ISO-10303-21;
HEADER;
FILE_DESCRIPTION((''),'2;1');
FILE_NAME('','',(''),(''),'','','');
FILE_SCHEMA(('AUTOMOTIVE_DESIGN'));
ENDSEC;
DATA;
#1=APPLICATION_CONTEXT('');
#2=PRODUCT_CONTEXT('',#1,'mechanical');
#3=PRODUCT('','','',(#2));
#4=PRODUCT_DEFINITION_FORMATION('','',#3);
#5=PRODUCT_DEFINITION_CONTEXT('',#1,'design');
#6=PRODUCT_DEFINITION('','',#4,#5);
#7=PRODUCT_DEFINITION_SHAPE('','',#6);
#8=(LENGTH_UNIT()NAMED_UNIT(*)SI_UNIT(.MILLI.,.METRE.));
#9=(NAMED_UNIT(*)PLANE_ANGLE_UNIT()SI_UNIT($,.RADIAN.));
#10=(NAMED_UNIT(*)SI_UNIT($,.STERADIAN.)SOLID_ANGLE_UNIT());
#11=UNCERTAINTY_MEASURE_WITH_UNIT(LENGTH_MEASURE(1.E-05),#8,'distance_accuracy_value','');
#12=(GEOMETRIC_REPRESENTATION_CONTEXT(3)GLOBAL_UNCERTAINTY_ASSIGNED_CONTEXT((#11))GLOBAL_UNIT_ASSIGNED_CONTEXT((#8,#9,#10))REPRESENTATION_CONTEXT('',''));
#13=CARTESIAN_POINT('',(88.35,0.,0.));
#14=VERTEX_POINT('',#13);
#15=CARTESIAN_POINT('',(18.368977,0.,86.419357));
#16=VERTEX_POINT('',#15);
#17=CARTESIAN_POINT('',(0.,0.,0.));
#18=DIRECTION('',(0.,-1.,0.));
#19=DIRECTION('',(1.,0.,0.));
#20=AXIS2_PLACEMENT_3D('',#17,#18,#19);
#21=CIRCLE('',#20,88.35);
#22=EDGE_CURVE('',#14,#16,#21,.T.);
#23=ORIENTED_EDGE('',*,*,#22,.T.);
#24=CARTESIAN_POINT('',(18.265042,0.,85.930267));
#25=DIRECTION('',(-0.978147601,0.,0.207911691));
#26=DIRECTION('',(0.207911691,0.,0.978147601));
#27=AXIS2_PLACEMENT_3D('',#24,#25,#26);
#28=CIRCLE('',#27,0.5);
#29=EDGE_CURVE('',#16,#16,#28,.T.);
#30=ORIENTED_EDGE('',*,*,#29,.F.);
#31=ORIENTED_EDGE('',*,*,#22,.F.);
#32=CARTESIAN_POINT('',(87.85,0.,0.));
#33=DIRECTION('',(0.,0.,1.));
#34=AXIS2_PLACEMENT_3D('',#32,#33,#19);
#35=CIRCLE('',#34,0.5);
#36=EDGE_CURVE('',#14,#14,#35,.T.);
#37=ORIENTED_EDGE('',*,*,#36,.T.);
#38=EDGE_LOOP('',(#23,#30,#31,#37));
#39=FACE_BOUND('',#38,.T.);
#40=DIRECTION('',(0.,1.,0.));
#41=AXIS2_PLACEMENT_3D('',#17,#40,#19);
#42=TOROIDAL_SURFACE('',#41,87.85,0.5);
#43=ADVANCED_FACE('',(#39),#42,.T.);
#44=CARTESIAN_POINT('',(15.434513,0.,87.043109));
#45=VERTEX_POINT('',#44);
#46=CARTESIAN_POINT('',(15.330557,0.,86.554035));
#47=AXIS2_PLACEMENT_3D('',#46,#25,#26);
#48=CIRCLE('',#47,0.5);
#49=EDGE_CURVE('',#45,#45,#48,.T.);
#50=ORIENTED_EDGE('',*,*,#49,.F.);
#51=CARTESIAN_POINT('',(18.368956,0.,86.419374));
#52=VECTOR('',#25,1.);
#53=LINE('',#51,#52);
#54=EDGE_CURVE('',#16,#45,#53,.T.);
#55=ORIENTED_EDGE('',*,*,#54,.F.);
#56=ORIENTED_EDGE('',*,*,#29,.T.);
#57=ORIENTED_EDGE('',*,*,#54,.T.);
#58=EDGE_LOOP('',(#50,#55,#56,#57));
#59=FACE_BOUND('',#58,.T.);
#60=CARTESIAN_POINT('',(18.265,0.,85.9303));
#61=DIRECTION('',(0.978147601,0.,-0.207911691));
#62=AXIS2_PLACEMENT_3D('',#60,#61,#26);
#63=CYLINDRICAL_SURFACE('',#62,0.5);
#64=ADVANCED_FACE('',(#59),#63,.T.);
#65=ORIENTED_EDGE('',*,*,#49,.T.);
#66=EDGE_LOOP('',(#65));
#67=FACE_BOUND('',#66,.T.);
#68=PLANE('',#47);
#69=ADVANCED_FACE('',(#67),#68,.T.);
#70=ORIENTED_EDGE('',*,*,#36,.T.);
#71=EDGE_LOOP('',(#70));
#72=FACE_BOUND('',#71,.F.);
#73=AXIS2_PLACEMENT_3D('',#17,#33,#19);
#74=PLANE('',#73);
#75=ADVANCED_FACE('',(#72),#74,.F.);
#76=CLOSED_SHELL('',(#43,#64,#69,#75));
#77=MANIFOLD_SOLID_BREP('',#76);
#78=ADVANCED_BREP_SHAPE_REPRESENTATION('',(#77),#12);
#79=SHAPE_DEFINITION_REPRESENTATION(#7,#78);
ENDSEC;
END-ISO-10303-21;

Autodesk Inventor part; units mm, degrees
ref_plane "YZ Plane" through (0, 0, 0) normal (1, 0, 0) x (0, 1, 0)
ref_plane "XZ Plane" through (0, 0, 0) normal (0, 1, 0) x (-1, 0, 0)
ref_plane "XY Plane" through (0, 0, 0) normal (0, 0, 1) x (1, 0, 0)
sketch "Sketch1" plane through (0, 0, 0) normal (0, 0, 1) x (1, 0, 0)
  circle A0 centre (87.85, 0) radius 0.5
  line L0 (0, -0.7) -> (0, 0.7) projected
  point P0 (0, 0)
  dimension "d0" = 1
  dimension "d1" = 87.85
  dimension "d2" = 0
revolve "Revolution1" add sketch "Sketch1" angle 78 about axis through (0, -10, 0) along (0, -1, 0)
sketch "Sketch2" plane through (18.265, 0, 85.9303) normal (-0.9781476, 0, 0.2079117) x (0.2079117, 0, 0.9781476)
  circle A0 centre (0, 0) radius 0.5 projected
  line L0 (-49.45, 0.5) -> (-49.45, -0.5) projected
  point P0 (-87.85, 0)
extrude "Extrusion1" add sketch "Sketch2" along normal blind 3
equation "\"d0\" = OpticalFiberDiameter"
equation "\"d1\" = -OpticalFiberClearence + 0.5 * SmallTrackDiameter + 0.5 * OpticalFiberDiameter"
equation "\"d3\" = ShortFiberAngle"
equation "\"d4\" = ScintillatorEdgeClearence - MPPCDepth"
equation "\"OpticalFiberDiameter\" = 1"
equation "\"OpticalFiberClearence\" = 0.15"
equation "\"SmallTrackDiameter\" = 175"
equation "\"ScintillatorEdgeClearence\" = 3"
equation "\"ScintillatorWidth\" = 145"
equation "\"ScintillatorHeight\" = 145"
equation "\"ShallowTrackDepth\" = 1.3"
equation "\"MPPCClearence\" = 0.075"
equation "\"MPPCSensorClearence\" = 1.45"
equation "\"MPPCSensorOffsett\" = 2.105"
equation "\"MPPCWidth\" = 5.9"
equation "\"MPPCHeight\" = 6.55"
equation "\"FiberEdgeOffsett\" = 5"
equation "\"MPPCDepth\" = 0"
equation "\"ShortFiberAngle\" = 78deg"
equation "\"LongFiberAngle\" = 30deg"
equation "\"LoopLargeTrackRatio\" = 1.1"
equation "\"FiberSensorClerence\" = 0.5"
equation "\"MountingScrewDepth\" = 4"
properties part number "Short Fiber 1" material "Glass"
